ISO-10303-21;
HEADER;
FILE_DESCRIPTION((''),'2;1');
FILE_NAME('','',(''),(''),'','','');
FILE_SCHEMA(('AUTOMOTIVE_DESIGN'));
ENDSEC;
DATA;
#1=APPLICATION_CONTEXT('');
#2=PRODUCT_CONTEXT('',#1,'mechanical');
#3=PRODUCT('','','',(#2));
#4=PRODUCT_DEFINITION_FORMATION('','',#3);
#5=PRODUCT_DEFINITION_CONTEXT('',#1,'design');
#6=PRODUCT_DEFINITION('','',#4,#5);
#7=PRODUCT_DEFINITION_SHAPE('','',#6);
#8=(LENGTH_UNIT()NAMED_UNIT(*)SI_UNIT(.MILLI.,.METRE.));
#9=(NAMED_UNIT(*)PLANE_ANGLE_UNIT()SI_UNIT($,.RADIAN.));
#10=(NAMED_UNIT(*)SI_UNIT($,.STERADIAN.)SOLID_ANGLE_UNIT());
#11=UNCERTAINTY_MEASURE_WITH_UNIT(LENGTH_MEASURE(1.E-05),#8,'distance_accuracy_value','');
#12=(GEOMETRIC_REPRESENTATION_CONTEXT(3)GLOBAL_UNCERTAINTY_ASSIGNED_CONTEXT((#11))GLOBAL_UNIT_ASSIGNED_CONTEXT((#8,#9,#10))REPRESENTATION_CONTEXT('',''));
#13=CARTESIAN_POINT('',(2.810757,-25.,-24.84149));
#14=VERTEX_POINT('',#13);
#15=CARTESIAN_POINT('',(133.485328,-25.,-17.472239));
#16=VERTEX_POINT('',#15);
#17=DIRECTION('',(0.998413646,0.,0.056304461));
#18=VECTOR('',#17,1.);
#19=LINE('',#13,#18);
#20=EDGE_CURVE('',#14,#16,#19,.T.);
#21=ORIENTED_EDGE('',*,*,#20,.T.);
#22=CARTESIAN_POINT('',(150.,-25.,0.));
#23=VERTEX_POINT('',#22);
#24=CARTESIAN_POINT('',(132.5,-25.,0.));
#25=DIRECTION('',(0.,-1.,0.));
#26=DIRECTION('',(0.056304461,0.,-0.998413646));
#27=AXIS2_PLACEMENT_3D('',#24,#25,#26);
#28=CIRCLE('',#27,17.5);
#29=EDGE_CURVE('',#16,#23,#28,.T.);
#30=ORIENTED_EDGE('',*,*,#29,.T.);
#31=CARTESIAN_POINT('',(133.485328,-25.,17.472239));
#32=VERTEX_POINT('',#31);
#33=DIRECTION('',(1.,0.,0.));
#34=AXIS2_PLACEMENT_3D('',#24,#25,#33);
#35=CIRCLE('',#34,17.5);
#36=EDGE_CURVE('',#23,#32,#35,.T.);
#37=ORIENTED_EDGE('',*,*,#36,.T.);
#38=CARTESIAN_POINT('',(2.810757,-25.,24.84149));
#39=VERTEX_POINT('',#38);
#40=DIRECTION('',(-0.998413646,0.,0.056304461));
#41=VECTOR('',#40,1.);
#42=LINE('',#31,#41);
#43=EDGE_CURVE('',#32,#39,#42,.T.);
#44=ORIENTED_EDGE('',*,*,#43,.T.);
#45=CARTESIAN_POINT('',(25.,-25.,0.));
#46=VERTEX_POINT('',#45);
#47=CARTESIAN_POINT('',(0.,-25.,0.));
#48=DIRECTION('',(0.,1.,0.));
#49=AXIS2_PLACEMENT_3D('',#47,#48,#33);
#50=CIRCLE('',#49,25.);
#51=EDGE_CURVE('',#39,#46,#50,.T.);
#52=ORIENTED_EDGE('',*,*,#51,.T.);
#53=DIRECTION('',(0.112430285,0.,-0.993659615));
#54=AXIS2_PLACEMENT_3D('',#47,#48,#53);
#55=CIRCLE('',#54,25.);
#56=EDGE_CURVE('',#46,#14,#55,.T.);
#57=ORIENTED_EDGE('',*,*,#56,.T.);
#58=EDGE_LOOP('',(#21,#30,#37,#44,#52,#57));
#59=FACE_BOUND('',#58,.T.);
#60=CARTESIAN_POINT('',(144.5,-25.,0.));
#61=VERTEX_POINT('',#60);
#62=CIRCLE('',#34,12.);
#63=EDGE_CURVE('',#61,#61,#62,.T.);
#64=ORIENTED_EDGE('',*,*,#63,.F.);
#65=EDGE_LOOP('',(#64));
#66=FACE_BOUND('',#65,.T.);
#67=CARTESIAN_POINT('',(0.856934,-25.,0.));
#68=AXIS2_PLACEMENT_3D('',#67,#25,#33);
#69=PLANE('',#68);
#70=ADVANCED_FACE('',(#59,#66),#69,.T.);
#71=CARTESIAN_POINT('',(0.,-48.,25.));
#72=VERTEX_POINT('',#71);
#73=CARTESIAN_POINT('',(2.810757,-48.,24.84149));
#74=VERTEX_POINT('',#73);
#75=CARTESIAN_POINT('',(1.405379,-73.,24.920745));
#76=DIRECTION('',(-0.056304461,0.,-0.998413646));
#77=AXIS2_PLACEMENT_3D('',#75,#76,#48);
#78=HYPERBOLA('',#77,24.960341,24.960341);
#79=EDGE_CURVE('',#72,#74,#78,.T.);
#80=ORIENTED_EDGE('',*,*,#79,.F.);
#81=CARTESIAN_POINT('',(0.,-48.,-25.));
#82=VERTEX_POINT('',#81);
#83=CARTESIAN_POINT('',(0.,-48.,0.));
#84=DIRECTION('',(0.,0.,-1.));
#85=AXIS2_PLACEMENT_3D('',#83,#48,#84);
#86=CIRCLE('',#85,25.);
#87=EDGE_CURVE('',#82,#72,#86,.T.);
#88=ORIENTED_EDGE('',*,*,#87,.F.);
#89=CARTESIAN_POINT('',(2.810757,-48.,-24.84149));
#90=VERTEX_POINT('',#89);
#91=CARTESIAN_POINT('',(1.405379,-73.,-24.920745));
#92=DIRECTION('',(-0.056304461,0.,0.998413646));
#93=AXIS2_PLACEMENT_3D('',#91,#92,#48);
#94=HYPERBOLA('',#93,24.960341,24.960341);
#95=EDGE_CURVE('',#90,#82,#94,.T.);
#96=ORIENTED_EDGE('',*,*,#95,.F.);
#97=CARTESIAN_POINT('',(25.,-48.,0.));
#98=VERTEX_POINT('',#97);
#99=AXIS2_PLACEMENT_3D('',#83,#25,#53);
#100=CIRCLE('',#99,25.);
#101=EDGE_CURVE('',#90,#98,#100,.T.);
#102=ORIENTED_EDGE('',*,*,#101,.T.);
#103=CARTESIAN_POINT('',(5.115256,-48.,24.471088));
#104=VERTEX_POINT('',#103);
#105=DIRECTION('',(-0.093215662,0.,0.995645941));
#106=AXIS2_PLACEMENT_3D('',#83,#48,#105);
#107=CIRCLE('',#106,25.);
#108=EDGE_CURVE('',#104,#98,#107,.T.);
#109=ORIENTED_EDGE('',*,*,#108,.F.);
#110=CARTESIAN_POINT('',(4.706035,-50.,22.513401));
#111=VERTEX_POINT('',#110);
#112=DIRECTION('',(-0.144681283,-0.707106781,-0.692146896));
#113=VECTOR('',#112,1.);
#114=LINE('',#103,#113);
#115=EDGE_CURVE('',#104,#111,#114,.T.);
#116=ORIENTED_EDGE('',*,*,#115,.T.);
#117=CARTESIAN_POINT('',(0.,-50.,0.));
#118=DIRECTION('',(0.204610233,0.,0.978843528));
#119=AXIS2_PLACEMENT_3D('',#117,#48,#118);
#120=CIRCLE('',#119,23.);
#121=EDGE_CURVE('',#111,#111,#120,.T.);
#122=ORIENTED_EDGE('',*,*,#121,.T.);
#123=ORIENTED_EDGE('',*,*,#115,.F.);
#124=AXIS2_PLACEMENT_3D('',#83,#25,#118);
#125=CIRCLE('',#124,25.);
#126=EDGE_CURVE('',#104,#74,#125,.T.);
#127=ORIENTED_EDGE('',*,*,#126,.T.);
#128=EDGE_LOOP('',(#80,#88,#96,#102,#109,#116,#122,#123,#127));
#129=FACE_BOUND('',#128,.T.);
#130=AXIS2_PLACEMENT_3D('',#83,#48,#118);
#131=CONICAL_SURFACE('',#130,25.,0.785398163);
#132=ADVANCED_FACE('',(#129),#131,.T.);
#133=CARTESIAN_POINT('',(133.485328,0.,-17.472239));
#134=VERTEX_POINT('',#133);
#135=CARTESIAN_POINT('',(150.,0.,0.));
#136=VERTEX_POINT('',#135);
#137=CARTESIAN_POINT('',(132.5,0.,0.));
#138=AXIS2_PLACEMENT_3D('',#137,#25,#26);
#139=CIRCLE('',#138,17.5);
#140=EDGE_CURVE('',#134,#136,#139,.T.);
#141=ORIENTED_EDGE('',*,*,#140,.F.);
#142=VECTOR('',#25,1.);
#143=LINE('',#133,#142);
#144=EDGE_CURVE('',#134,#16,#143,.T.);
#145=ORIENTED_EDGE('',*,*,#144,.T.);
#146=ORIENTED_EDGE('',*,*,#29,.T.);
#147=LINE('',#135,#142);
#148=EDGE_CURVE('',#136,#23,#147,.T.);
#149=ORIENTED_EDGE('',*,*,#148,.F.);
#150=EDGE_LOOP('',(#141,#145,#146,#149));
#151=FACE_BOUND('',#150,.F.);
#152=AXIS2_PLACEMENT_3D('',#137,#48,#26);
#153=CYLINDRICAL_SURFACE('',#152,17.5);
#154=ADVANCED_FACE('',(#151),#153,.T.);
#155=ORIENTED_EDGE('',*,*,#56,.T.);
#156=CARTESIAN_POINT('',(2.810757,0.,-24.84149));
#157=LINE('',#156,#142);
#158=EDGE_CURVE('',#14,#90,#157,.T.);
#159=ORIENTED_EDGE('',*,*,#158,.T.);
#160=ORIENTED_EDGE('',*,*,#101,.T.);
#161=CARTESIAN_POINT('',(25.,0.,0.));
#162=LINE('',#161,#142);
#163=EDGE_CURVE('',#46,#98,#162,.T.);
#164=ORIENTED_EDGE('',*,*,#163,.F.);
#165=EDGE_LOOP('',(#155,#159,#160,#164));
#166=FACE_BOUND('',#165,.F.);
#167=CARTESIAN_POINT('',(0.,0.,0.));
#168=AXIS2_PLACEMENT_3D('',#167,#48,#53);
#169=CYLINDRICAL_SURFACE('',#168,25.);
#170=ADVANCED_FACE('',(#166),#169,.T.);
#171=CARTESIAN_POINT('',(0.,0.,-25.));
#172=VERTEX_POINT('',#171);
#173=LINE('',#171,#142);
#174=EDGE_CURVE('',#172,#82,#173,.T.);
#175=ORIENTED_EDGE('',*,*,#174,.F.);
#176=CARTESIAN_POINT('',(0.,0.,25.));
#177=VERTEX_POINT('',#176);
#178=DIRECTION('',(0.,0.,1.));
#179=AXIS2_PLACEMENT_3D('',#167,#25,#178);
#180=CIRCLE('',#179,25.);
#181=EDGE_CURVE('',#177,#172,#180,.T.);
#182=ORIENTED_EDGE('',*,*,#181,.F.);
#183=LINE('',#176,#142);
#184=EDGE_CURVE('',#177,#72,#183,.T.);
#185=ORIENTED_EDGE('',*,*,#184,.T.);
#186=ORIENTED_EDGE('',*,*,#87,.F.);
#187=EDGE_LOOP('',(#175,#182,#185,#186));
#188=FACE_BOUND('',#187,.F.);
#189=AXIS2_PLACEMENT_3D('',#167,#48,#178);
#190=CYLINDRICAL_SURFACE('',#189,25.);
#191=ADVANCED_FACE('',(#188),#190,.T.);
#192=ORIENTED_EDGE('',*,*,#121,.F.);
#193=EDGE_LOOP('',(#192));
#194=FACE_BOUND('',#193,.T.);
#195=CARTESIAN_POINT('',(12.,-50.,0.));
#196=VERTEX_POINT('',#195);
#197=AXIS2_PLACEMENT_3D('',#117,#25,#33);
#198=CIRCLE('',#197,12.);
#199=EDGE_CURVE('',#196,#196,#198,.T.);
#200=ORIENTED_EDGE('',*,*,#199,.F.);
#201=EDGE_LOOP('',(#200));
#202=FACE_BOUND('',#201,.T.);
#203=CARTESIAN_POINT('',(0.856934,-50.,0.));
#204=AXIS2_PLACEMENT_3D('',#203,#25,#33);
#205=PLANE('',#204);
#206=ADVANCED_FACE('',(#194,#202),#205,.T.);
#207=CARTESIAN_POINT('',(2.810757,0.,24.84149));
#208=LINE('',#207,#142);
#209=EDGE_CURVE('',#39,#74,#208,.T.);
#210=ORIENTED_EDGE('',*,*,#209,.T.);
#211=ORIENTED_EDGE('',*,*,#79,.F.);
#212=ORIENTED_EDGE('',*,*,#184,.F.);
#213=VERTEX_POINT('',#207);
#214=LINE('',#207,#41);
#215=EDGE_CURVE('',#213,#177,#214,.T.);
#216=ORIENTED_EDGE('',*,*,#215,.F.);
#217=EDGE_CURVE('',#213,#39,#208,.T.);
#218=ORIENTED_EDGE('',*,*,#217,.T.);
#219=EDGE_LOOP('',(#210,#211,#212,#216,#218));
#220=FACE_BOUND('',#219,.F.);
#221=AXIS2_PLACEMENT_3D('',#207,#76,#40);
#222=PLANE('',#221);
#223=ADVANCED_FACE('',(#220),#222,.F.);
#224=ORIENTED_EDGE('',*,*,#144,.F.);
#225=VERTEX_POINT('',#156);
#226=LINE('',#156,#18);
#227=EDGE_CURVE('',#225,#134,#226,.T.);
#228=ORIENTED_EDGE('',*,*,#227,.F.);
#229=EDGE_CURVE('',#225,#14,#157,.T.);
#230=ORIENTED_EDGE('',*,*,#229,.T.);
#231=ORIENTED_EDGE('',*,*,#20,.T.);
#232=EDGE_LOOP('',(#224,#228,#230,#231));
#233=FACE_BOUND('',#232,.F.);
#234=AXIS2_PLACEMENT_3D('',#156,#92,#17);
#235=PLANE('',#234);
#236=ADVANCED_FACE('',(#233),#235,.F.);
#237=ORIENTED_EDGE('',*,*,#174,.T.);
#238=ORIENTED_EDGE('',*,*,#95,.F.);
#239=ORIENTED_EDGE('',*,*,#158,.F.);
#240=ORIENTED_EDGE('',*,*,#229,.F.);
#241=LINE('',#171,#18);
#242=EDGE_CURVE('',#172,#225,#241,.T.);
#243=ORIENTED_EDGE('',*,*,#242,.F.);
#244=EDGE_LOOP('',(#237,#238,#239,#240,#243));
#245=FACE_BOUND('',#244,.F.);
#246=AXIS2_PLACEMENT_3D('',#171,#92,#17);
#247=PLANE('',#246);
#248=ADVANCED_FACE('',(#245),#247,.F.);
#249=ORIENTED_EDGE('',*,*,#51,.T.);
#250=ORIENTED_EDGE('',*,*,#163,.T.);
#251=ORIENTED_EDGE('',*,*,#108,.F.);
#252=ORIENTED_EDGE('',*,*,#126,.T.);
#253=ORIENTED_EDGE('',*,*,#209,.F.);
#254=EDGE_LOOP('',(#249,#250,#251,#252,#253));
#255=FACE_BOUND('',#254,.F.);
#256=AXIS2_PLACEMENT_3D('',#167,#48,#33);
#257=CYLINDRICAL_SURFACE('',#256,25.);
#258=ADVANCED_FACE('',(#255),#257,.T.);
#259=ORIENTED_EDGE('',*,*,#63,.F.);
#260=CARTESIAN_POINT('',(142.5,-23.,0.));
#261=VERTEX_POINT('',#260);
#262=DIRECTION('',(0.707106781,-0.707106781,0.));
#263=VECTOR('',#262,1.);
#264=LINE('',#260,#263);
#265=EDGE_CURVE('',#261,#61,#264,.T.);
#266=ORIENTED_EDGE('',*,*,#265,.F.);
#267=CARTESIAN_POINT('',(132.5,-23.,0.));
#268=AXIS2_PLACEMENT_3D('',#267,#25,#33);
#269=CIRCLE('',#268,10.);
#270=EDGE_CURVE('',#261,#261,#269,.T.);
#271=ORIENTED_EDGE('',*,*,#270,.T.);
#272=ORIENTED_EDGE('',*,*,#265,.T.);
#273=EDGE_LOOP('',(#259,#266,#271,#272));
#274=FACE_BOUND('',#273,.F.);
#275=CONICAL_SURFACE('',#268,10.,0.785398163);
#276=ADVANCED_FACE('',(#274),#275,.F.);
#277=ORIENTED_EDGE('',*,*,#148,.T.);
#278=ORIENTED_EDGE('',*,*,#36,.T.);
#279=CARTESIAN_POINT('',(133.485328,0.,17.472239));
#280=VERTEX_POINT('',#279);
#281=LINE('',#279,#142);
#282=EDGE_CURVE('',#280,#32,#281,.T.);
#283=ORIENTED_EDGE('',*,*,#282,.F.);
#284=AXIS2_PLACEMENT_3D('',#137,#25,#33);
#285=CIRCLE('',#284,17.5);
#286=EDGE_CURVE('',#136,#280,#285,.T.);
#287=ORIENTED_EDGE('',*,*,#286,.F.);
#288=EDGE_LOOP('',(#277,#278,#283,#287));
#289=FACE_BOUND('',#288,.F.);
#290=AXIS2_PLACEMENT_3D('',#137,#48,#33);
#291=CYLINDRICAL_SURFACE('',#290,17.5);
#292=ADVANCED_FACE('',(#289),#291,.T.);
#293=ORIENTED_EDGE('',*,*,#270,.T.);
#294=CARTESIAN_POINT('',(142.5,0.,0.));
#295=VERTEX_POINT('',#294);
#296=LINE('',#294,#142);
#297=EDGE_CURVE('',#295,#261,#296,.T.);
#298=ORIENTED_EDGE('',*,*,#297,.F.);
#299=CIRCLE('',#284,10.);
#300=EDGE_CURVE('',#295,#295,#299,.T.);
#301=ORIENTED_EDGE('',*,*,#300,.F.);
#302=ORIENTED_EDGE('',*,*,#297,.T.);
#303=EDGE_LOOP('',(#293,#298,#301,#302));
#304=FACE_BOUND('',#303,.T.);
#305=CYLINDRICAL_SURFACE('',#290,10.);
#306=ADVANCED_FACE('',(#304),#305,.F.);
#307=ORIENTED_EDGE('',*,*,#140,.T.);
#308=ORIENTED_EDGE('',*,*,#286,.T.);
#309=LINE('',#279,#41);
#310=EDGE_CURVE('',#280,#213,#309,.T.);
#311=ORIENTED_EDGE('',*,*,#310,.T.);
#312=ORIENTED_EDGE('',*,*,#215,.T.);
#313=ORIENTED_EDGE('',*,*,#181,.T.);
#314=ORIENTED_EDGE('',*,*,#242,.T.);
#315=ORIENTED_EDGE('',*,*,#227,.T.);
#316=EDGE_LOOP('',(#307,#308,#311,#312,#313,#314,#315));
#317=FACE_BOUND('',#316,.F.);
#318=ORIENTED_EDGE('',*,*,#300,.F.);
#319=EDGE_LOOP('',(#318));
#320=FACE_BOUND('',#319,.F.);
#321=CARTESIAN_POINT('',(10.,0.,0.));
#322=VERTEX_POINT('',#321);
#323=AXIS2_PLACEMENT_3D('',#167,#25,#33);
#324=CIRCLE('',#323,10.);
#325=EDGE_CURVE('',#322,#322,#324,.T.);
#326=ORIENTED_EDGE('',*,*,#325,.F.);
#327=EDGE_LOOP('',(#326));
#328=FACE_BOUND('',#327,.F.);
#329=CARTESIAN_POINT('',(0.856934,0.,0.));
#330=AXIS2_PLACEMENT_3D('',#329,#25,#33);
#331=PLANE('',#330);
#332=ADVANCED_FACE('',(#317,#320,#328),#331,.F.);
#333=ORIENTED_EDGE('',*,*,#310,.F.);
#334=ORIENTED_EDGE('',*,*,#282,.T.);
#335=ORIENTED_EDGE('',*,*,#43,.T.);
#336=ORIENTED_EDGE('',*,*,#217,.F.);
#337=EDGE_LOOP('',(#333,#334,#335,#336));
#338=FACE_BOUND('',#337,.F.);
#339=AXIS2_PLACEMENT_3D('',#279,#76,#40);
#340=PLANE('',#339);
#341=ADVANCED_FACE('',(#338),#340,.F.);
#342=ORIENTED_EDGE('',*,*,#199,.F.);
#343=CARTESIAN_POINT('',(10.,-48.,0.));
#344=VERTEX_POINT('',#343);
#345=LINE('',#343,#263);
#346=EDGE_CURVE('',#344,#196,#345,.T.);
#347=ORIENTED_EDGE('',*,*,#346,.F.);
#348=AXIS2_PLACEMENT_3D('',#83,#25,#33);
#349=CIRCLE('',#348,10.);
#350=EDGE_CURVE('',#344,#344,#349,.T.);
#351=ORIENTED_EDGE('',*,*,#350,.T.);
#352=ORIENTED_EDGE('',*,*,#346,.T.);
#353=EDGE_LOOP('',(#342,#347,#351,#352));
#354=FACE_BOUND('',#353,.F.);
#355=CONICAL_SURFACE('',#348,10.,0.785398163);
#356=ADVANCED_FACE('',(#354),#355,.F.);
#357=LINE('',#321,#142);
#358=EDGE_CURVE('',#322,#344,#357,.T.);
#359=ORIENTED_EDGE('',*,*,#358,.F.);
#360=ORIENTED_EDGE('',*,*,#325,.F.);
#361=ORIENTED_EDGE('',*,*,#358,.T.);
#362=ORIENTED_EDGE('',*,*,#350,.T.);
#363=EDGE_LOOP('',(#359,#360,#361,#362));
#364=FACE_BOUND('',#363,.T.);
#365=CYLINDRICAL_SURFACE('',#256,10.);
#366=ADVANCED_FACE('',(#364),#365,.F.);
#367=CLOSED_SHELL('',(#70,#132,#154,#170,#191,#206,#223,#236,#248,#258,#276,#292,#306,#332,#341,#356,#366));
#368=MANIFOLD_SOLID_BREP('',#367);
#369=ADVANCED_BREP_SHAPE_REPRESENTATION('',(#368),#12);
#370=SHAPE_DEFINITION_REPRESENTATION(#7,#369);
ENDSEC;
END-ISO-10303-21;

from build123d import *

# Parameters (mm, degrees)
F0_R        = 10
F1_DEPTH    = 25
F2_DEPTH    = 50
F3_T4_ANGLE = 203.6133668192
F3_T8_ANGLE = 190.697258089


# Not quite as in the source:
# - a fillet or chamfer that OpenCascade refuses, or shapes differently, is made with other operations: its cross-section is extruded or revolved along the edge and cut away or added


with BuildPart() as f1:
    # F0 (on Front) → F1 (new body)
    with BuildSketch(Plane.XZ):
        with BuildLine():
            Line((2.8107571296, 24.8414903812), (0, 25))
            ThreePointArc((0, 25), (-25, 0), (0, -25))
            Line((0, -25), (2.8107571296, -24.8414903812))
            ThreePointArc((2.8107571296, -24.8414903812), (18.6449581421, -16.6542948179), (25, 0))
            ThreePointArc((25, 0), (18.6449581421, 16.6542948179), (2.8107571296, 24.8414903812))
        make_face()
        Circle(F0_R, mode=Mode.SUBTRACT)
        with BuildLine():
            Line((133.4853280749, 17.4722387972), (2.8107571296, 24.8414903812))
            ThreePointArc((2.8107571296, 24.8414903812), (18.6449581421, 16.6542948179), (25, 0))
            ThreePointArc((25, 0), (18.6449581421, -16.6542948179), (2.8107571296, -24.8414903812))
            Line((2.8107571296, -24.8414903812), (133.4853280749, -17.4722387972))
            ThreePointArc((133.4853280749, -17.4722387972), (115, 0), (133.4853280749, 17.4722387972))
        make_face()
        with BuildLine():
            ThreePointArc((150, 0), (145.2179644855, 12.0209558415), (133.4853280749, 17.4722387972))
            ThreePointArc((133.4853280749, 17.4722387972), (115, 0), (133.4853280749, -17.4722387972))
            ThreePointArc((133.4853280749, -17.4722387972), (145.2179644855, -12.0209558415), (150, 0))
        make_face()
        with Locations((132.5, 0)):
            Circle(F0_R, mode=Mode.SUBTRACT)
    extrude(amount=F1_DEPTH)

    # F0 (on Front) → F2 (join)
    with BuildSketch(Plane.XZ):
        with BuildLine():
            Line((2.8107571296, 24.8414903812), (0, 25))
            ThreePointArc((0, 25), (-25, 0), (0, -25))
            Line((0, -25), (2.8107571296, -24.8414903812))
            ThreePointArc((2.8107571296, -24.8414903812), (18.6449581421, -16.6542948179), (25, 0))
            ThreePointArc((25, 0), (18.6449581421, 16.6542948179), (2.8107571296, 24.8414903812))
        make_face()
        Circle(F0_R, mode=Mode.SUBTRACT)
    extrude(amount=F2_DEPTH)

    # F3: chamfer of 2 on 4 edges, made by hand

    # F3_s1 → F3_t2 (revolve, cut)
    with BuildSketch(Plane.XY):
        Polygon((10, -48), (12, -50), (10, -50), align=None)
    revolve(axis=Axis((0, -50, 0), (0, -1, 0)), mode=Mode.SUBTRACT)

    # F3_s3 → F3_t4 (revolve, cut)
    with BuildSketch(Plane(origin=(0, 0, 0), x_dir=(0, 1, 0), z_dir=(0.9788435281, 0, -0.2046102329))):
        Polygon((-48, 25), (-50, 23), (-50, 25), align=None)
    revolve(axis=Axis((0, -50, 0), (0, -1, 0)), revolution_arc=F3_T4_ANGLE, mode=Mode.SUBTRACT)

    # F3_s5 → F3_t6 (revolve, cut)
    with BuildSketch(Plane.XY):
        Polygon((142.5, -23), (144.5, -25), (142.5, -25), align=None)
    revolve(axis=Axis((132.5, -25, 0), (0, -1, 0)), mode=Mode.SUBTRACT)

    # F3_s7 → F3_t8 (revolve, cut)
    with BuildSketch(Plane(origin=(0, 0, 0), x_dir=(0, 1, 0), z_dir=(-0.9956459412, 0, -0.0932156624))):
        Polygon((-48, -25), (-50, -23), (-50, -25), align=None)
    revolve(axis=Axis((0, -50, 0), (0, 1, 0)), revolution_arc=F3_T8_ANGLE, mode=Mode.SUBTRACT)


solid = f1.part
